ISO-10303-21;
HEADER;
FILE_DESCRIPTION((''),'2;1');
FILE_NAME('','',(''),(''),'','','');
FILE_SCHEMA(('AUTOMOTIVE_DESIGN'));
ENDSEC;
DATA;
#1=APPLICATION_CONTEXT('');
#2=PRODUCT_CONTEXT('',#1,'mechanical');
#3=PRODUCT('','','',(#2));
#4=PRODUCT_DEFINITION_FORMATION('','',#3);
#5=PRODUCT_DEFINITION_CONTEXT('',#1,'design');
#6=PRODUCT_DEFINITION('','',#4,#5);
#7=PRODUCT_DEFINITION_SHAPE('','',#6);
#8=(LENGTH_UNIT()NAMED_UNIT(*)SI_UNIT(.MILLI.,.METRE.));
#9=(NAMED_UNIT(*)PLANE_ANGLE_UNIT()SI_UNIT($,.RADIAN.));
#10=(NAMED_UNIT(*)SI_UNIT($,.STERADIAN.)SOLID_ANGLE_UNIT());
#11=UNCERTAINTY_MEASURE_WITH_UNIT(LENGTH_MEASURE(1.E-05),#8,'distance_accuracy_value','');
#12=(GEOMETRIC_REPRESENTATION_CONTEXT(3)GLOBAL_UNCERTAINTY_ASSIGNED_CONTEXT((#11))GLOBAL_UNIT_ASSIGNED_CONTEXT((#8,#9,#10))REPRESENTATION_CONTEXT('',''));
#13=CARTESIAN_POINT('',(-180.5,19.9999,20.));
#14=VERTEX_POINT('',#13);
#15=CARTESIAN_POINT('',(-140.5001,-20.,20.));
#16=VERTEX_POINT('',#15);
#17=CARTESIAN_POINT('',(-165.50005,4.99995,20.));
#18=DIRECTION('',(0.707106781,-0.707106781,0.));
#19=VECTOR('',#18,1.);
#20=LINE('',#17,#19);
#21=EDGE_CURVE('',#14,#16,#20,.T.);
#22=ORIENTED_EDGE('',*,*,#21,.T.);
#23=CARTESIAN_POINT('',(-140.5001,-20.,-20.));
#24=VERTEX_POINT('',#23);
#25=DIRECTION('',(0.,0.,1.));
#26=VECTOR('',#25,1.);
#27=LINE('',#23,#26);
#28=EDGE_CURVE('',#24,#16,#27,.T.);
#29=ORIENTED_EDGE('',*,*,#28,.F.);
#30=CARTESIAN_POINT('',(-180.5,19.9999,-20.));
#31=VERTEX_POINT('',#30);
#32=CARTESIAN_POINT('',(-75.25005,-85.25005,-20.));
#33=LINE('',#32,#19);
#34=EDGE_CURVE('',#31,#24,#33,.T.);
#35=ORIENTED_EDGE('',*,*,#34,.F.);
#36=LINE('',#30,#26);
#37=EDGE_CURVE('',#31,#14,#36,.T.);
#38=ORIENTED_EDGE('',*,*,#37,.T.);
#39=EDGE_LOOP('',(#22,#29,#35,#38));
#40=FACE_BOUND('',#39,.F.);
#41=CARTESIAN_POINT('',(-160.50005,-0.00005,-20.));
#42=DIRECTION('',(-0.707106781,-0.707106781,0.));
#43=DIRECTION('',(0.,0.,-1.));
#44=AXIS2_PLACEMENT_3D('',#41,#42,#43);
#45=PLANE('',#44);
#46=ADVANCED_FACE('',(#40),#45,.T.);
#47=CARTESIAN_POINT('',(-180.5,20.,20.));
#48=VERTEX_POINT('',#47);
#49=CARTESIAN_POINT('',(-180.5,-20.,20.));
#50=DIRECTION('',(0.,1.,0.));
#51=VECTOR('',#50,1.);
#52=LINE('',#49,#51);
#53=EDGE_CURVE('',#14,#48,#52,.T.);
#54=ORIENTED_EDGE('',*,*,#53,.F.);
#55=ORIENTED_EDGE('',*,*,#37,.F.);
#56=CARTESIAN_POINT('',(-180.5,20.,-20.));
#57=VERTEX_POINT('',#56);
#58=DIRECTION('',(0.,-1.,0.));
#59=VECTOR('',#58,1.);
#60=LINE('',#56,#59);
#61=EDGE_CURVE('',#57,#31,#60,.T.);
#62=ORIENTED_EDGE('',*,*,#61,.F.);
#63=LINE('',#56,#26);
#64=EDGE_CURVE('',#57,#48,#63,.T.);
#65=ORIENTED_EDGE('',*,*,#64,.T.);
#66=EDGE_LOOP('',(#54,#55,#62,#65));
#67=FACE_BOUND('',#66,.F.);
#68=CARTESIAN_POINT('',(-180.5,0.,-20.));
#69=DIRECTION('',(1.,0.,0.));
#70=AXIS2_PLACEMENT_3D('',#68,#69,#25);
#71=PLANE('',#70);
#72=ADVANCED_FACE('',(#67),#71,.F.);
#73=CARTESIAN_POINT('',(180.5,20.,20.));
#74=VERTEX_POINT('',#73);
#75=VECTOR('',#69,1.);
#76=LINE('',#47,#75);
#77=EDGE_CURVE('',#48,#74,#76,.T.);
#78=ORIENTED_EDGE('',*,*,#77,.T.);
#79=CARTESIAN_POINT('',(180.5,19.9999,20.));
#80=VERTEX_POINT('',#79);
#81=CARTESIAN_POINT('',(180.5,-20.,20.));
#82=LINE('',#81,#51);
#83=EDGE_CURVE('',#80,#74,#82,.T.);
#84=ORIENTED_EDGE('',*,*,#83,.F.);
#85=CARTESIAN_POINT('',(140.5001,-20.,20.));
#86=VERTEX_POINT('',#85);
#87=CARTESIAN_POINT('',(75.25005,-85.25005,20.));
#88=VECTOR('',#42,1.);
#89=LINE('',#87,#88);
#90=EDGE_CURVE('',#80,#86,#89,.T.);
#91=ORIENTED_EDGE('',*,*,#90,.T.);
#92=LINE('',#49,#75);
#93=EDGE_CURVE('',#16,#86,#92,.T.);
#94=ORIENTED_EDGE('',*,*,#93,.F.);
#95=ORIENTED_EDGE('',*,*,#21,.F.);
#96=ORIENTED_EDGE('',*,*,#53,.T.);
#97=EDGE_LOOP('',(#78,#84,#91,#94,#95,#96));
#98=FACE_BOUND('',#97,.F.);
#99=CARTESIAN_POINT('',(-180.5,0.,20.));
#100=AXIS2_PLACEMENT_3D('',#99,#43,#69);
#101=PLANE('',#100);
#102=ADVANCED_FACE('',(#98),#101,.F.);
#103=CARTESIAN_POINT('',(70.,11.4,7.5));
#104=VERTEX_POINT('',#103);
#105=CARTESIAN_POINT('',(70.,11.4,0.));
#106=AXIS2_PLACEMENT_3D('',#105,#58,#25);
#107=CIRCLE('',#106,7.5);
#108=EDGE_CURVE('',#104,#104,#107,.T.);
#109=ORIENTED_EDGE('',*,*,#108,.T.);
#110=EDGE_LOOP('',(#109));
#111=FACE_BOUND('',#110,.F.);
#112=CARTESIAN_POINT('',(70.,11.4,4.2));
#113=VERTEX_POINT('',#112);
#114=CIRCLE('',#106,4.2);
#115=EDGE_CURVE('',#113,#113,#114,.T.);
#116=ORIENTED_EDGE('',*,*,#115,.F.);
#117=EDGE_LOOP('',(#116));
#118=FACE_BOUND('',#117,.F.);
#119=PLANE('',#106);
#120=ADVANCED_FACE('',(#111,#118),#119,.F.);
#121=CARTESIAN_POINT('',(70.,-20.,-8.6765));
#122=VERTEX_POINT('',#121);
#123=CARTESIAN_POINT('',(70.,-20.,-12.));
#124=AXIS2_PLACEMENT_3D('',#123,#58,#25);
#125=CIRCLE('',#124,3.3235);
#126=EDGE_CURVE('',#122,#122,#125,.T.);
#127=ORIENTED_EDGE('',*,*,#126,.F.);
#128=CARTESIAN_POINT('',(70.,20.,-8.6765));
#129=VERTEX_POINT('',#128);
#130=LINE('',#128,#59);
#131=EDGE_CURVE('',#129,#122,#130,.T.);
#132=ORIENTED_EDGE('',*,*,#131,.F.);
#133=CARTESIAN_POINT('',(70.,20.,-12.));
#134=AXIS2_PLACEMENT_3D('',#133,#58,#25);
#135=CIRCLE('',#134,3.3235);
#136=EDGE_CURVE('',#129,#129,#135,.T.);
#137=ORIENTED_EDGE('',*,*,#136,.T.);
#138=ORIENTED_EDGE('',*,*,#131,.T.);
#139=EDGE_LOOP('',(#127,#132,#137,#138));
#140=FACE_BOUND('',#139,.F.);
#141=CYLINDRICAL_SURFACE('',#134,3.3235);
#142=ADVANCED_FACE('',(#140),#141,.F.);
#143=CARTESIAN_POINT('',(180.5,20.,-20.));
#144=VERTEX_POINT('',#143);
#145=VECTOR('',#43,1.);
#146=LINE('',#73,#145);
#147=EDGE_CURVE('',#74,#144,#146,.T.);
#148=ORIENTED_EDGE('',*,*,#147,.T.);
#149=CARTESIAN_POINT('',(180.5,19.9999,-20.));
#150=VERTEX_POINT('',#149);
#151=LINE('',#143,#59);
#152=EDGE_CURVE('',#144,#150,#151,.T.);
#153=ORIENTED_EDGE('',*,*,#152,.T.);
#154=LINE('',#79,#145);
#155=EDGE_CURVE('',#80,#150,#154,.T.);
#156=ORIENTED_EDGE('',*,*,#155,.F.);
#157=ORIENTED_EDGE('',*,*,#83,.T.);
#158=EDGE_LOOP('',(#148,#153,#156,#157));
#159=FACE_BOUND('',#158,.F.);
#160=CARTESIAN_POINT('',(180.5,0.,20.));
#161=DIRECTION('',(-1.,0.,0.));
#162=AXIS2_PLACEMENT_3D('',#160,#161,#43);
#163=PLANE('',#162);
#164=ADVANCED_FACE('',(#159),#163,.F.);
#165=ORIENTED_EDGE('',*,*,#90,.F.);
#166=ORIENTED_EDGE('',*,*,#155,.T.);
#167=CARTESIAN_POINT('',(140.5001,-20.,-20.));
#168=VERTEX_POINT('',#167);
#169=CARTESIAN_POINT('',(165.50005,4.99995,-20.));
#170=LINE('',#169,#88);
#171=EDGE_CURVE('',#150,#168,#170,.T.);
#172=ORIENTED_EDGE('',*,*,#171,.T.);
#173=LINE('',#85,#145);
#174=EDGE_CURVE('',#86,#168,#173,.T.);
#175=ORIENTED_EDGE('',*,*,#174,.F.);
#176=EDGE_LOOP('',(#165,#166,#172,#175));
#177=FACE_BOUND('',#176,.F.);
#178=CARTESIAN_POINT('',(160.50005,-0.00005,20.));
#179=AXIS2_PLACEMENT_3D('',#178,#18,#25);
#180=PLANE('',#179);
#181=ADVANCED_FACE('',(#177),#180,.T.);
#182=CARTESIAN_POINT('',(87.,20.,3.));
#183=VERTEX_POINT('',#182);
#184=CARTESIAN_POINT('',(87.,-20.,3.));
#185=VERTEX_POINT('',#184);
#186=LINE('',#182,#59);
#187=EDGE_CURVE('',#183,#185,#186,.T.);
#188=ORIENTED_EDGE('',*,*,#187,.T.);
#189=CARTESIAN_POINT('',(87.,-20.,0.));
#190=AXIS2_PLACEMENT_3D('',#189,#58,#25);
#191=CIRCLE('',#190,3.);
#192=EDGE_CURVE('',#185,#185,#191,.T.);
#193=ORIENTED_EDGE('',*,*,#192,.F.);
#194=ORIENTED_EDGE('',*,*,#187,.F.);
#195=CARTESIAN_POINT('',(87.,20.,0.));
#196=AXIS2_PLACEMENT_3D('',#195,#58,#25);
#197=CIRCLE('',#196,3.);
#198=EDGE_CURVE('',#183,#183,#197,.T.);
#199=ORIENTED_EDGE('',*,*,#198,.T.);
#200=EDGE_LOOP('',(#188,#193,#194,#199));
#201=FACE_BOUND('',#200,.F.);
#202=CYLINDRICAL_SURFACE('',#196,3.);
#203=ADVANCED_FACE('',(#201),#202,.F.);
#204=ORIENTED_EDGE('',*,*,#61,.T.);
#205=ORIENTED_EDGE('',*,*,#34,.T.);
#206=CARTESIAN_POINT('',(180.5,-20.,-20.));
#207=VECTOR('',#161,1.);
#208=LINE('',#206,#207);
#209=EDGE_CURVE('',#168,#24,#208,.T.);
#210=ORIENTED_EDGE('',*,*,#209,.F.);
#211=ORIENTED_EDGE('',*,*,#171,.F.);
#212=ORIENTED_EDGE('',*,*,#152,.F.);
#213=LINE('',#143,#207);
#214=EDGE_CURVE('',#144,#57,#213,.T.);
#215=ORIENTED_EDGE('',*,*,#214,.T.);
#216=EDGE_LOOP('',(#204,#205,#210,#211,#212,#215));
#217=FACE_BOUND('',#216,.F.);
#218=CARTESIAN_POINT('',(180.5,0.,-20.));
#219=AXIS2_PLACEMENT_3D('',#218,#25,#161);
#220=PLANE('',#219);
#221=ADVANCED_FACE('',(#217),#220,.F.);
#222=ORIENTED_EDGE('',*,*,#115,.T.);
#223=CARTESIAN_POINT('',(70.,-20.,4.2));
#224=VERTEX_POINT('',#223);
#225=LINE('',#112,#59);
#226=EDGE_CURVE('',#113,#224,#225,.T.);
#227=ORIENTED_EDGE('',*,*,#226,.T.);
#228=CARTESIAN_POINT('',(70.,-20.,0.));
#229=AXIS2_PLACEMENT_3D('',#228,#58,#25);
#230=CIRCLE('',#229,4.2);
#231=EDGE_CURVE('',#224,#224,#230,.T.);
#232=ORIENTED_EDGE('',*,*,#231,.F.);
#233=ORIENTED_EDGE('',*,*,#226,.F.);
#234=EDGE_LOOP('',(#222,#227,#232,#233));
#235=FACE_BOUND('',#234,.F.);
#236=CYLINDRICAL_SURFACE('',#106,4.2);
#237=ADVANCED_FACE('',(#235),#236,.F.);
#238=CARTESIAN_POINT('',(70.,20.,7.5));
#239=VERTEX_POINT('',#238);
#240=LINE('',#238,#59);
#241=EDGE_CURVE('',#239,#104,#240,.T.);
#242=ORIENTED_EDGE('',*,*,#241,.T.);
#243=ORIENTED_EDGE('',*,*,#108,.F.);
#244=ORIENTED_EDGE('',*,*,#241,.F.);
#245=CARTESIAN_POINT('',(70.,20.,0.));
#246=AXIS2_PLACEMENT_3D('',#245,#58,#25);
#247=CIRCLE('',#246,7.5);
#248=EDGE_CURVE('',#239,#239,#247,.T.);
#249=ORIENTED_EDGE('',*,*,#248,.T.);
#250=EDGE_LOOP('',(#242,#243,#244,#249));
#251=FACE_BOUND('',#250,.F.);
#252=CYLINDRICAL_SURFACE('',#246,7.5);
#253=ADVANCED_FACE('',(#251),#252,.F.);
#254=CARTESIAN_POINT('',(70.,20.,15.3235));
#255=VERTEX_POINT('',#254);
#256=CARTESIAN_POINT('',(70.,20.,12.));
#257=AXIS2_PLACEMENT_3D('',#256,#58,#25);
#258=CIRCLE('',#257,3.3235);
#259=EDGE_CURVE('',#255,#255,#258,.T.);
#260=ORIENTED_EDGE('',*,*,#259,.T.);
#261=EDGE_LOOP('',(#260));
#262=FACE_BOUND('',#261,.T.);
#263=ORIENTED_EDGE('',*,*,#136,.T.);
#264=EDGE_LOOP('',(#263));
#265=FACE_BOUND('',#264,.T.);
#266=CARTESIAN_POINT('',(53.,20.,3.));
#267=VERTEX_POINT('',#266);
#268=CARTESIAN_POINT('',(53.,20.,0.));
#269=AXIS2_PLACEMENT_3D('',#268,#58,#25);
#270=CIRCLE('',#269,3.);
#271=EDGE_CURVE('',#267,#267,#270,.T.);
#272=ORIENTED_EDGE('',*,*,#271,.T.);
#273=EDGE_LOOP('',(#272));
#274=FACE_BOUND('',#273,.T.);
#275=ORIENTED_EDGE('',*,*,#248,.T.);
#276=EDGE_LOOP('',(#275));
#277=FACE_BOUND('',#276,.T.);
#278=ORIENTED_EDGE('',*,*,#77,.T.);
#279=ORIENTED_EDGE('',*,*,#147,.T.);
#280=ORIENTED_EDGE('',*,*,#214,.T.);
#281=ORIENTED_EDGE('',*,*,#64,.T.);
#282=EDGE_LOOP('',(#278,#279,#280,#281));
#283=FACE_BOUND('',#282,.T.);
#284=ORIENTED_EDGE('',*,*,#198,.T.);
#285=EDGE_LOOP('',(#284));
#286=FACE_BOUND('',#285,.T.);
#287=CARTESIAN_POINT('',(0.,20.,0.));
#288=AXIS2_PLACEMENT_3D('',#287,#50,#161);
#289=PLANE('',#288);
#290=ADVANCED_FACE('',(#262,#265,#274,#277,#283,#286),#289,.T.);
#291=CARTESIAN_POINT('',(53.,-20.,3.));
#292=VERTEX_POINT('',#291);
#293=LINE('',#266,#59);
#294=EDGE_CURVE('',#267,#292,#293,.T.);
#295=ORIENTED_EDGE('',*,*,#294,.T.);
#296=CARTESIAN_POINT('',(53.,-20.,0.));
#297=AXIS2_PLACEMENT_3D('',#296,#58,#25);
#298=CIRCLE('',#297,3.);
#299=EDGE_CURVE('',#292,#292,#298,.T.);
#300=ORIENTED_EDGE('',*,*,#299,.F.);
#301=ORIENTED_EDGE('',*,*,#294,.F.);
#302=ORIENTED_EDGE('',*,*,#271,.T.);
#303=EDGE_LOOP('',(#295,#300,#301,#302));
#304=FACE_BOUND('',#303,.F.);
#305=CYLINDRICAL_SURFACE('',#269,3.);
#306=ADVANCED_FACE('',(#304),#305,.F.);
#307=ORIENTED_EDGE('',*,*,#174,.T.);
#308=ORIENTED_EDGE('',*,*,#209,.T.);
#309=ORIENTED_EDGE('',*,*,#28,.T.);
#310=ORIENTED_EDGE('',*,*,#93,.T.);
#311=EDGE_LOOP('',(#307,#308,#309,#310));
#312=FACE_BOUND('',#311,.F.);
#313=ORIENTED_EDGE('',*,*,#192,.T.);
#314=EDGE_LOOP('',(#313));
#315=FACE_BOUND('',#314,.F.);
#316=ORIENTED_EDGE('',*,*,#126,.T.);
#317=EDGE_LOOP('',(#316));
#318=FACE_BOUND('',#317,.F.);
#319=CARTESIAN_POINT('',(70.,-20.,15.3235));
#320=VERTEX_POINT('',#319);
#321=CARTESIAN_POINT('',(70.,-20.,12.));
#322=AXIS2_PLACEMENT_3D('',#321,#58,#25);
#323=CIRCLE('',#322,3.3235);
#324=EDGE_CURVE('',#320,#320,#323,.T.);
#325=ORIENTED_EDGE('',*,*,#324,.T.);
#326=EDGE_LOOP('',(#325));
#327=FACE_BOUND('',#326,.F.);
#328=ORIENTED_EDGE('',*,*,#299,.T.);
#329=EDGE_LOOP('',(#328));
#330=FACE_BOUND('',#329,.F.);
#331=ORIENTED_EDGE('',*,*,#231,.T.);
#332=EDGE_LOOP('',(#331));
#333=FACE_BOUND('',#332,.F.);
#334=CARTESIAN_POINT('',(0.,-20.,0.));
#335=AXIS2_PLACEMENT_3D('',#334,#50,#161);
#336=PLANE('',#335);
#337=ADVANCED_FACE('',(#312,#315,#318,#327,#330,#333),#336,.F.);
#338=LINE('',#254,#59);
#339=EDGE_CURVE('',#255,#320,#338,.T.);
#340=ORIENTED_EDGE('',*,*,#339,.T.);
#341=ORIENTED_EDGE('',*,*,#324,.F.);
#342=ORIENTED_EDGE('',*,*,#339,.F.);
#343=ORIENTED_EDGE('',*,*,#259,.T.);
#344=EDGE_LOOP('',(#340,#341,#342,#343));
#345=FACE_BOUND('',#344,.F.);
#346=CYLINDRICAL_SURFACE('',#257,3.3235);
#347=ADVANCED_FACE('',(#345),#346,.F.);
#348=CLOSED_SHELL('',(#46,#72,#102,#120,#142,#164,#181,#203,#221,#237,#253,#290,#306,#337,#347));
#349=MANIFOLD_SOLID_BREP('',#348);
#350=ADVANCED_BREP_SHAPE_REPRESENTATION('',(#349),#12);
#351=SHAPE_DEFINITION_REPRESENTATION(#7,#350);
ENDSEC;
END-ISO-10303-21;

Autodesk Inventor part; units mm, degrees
ref_plane "XZ Plane" through (0, 0, 0) normal (0, 1, 0) x (-1, 0, 0)
ref_plane "XY Plane" through (0, 0, 0) normal (0, 0, 1) x (1, 0, 0)
sketch "Skizze1" plane through (0, 0, 0) normal (0, 1, 0) x (-1, 0, 0)
  line L0 (180.5, 20) -> (-180.5, 20)
  line L1 (-180.5, 20) -> (-180.5, -20)
  line L2 (-180.5, -20) -> (180.5, -20)
  line L3 (180.5, -20) -> (180.5, 20)
  line L4 (180.5, 20) -> (-180.5, -20) construction
  line L5 (-180.5, 20) -> (180.5, -20) construction
  point P0 (0, 0)
  dimension "d0" = 361
  dimension "d1" = 40
extrude "Extrusion1" add sketch "Skizze1" along normal mid plane 40
chamfer "Fasen1" distance 40 angle 45 2 edges at (-180.5, -20, 0) (180.5, -20, 0)
sketch "Skizze2" plane through (0, 20, 0) normal (0, 1, 0) x (1, 0, 0)
  line L0 (180.5, -20) -> (180.5, 20) projected
  line L1 (-180.5, 20) -> (-180.5, -20) projected
  line L2 (180.5, 20) -> (-180.5, 20) projected
  line L3 (-180.5, 0) -> (180.5, 0) construction
  line L4 (-180.5, -20) -> (180.5, -20) projected
  line L5 (70, -20) -> (70, 20) construction
  point P0 (0, 0)
  point P1 (70, 0)
  point P2 (87, 0)
  point P3 (53, 0)
  point P4 (70, -12)
  point P5 (70, 12)
  point P6 (70, 0)
  dimension "d24" = 20
  dimension "d25" = 17
  dimension "d26" = 17
  dimension "d34" = 70
  dimension "d35" = 12
  dimension "d36" = 12
hole "Bohrung1" at (87, 20, 0) at (53, 20, 0) direction (0, -1, 0) diameter 6 end through all
hole "Hole3" at (70, 20, 0) direction (0, -1, 0) diameter 8.4 end through all counterbore diameter 15 counterbore depth 8.6
hole "Hole4" at (70, 20, 12) at (70, 20, -12) direction (0, -1, 0) diameter 6.647 end through all thread size "M8x1.25" class "6H" standard "ISO Metric profile"
ref_plane "Work Plane1" through (70, 20, 12) normal (1, 0, 0) x (0, 1, 0)
equation "\"d0\" = Laenge_Rahmen"
equation "\"d1\" = Breite_Rahmen"
equation "\"d2\" = Hoehe_Rahmen"
equation "\"d4\" = Breite_Rahmen"
equation "\"d24\" = Abstand_Bohrung_Rahmen"
equation "\"d25\" = 0.5 * Abtand_Fuehrungsstifte"
equation "\"d26\" = d25"
equation "\"d34\" = Exzentrizität"
equation "\"d35\" = Madenschraube_Abstand"
equation "\"d36\" = d35"
equation "\"d9\" = Durchmesser_Stifte"
equation "\"Breite_Rahmen\" = 40"
equation "\"Hoehe_Rahmen\" = Breite_Rahmen"
equation "\"Breite_Bauteiltraeger\" = 239"
equation "\"Lange_Bauteiltraeger\" = Breite_Bauteiltraeger"
equation "\"Laenge_Rahmen\" = Innenmaß_Rahmen + 2 * Breite_Rahmen"
equation "\"Toleranz_Verstellung\" = 1"
equation "\"Abtand_Fuehrungsstifte\" = 34"
equation "\"Durchmesser_Stifte\" = 6"
equation "\"Abstand_Bohrung_Rahmen\" = 20"
equation "\"Exzentrizität\" = 70"
equation "\"Madenschraube_Abstand\" = 12"
equation "\"Innenmaß_Rahmen\" = 281"
properties part number "TS_Positionierungseinheit_Rahmen_int"
